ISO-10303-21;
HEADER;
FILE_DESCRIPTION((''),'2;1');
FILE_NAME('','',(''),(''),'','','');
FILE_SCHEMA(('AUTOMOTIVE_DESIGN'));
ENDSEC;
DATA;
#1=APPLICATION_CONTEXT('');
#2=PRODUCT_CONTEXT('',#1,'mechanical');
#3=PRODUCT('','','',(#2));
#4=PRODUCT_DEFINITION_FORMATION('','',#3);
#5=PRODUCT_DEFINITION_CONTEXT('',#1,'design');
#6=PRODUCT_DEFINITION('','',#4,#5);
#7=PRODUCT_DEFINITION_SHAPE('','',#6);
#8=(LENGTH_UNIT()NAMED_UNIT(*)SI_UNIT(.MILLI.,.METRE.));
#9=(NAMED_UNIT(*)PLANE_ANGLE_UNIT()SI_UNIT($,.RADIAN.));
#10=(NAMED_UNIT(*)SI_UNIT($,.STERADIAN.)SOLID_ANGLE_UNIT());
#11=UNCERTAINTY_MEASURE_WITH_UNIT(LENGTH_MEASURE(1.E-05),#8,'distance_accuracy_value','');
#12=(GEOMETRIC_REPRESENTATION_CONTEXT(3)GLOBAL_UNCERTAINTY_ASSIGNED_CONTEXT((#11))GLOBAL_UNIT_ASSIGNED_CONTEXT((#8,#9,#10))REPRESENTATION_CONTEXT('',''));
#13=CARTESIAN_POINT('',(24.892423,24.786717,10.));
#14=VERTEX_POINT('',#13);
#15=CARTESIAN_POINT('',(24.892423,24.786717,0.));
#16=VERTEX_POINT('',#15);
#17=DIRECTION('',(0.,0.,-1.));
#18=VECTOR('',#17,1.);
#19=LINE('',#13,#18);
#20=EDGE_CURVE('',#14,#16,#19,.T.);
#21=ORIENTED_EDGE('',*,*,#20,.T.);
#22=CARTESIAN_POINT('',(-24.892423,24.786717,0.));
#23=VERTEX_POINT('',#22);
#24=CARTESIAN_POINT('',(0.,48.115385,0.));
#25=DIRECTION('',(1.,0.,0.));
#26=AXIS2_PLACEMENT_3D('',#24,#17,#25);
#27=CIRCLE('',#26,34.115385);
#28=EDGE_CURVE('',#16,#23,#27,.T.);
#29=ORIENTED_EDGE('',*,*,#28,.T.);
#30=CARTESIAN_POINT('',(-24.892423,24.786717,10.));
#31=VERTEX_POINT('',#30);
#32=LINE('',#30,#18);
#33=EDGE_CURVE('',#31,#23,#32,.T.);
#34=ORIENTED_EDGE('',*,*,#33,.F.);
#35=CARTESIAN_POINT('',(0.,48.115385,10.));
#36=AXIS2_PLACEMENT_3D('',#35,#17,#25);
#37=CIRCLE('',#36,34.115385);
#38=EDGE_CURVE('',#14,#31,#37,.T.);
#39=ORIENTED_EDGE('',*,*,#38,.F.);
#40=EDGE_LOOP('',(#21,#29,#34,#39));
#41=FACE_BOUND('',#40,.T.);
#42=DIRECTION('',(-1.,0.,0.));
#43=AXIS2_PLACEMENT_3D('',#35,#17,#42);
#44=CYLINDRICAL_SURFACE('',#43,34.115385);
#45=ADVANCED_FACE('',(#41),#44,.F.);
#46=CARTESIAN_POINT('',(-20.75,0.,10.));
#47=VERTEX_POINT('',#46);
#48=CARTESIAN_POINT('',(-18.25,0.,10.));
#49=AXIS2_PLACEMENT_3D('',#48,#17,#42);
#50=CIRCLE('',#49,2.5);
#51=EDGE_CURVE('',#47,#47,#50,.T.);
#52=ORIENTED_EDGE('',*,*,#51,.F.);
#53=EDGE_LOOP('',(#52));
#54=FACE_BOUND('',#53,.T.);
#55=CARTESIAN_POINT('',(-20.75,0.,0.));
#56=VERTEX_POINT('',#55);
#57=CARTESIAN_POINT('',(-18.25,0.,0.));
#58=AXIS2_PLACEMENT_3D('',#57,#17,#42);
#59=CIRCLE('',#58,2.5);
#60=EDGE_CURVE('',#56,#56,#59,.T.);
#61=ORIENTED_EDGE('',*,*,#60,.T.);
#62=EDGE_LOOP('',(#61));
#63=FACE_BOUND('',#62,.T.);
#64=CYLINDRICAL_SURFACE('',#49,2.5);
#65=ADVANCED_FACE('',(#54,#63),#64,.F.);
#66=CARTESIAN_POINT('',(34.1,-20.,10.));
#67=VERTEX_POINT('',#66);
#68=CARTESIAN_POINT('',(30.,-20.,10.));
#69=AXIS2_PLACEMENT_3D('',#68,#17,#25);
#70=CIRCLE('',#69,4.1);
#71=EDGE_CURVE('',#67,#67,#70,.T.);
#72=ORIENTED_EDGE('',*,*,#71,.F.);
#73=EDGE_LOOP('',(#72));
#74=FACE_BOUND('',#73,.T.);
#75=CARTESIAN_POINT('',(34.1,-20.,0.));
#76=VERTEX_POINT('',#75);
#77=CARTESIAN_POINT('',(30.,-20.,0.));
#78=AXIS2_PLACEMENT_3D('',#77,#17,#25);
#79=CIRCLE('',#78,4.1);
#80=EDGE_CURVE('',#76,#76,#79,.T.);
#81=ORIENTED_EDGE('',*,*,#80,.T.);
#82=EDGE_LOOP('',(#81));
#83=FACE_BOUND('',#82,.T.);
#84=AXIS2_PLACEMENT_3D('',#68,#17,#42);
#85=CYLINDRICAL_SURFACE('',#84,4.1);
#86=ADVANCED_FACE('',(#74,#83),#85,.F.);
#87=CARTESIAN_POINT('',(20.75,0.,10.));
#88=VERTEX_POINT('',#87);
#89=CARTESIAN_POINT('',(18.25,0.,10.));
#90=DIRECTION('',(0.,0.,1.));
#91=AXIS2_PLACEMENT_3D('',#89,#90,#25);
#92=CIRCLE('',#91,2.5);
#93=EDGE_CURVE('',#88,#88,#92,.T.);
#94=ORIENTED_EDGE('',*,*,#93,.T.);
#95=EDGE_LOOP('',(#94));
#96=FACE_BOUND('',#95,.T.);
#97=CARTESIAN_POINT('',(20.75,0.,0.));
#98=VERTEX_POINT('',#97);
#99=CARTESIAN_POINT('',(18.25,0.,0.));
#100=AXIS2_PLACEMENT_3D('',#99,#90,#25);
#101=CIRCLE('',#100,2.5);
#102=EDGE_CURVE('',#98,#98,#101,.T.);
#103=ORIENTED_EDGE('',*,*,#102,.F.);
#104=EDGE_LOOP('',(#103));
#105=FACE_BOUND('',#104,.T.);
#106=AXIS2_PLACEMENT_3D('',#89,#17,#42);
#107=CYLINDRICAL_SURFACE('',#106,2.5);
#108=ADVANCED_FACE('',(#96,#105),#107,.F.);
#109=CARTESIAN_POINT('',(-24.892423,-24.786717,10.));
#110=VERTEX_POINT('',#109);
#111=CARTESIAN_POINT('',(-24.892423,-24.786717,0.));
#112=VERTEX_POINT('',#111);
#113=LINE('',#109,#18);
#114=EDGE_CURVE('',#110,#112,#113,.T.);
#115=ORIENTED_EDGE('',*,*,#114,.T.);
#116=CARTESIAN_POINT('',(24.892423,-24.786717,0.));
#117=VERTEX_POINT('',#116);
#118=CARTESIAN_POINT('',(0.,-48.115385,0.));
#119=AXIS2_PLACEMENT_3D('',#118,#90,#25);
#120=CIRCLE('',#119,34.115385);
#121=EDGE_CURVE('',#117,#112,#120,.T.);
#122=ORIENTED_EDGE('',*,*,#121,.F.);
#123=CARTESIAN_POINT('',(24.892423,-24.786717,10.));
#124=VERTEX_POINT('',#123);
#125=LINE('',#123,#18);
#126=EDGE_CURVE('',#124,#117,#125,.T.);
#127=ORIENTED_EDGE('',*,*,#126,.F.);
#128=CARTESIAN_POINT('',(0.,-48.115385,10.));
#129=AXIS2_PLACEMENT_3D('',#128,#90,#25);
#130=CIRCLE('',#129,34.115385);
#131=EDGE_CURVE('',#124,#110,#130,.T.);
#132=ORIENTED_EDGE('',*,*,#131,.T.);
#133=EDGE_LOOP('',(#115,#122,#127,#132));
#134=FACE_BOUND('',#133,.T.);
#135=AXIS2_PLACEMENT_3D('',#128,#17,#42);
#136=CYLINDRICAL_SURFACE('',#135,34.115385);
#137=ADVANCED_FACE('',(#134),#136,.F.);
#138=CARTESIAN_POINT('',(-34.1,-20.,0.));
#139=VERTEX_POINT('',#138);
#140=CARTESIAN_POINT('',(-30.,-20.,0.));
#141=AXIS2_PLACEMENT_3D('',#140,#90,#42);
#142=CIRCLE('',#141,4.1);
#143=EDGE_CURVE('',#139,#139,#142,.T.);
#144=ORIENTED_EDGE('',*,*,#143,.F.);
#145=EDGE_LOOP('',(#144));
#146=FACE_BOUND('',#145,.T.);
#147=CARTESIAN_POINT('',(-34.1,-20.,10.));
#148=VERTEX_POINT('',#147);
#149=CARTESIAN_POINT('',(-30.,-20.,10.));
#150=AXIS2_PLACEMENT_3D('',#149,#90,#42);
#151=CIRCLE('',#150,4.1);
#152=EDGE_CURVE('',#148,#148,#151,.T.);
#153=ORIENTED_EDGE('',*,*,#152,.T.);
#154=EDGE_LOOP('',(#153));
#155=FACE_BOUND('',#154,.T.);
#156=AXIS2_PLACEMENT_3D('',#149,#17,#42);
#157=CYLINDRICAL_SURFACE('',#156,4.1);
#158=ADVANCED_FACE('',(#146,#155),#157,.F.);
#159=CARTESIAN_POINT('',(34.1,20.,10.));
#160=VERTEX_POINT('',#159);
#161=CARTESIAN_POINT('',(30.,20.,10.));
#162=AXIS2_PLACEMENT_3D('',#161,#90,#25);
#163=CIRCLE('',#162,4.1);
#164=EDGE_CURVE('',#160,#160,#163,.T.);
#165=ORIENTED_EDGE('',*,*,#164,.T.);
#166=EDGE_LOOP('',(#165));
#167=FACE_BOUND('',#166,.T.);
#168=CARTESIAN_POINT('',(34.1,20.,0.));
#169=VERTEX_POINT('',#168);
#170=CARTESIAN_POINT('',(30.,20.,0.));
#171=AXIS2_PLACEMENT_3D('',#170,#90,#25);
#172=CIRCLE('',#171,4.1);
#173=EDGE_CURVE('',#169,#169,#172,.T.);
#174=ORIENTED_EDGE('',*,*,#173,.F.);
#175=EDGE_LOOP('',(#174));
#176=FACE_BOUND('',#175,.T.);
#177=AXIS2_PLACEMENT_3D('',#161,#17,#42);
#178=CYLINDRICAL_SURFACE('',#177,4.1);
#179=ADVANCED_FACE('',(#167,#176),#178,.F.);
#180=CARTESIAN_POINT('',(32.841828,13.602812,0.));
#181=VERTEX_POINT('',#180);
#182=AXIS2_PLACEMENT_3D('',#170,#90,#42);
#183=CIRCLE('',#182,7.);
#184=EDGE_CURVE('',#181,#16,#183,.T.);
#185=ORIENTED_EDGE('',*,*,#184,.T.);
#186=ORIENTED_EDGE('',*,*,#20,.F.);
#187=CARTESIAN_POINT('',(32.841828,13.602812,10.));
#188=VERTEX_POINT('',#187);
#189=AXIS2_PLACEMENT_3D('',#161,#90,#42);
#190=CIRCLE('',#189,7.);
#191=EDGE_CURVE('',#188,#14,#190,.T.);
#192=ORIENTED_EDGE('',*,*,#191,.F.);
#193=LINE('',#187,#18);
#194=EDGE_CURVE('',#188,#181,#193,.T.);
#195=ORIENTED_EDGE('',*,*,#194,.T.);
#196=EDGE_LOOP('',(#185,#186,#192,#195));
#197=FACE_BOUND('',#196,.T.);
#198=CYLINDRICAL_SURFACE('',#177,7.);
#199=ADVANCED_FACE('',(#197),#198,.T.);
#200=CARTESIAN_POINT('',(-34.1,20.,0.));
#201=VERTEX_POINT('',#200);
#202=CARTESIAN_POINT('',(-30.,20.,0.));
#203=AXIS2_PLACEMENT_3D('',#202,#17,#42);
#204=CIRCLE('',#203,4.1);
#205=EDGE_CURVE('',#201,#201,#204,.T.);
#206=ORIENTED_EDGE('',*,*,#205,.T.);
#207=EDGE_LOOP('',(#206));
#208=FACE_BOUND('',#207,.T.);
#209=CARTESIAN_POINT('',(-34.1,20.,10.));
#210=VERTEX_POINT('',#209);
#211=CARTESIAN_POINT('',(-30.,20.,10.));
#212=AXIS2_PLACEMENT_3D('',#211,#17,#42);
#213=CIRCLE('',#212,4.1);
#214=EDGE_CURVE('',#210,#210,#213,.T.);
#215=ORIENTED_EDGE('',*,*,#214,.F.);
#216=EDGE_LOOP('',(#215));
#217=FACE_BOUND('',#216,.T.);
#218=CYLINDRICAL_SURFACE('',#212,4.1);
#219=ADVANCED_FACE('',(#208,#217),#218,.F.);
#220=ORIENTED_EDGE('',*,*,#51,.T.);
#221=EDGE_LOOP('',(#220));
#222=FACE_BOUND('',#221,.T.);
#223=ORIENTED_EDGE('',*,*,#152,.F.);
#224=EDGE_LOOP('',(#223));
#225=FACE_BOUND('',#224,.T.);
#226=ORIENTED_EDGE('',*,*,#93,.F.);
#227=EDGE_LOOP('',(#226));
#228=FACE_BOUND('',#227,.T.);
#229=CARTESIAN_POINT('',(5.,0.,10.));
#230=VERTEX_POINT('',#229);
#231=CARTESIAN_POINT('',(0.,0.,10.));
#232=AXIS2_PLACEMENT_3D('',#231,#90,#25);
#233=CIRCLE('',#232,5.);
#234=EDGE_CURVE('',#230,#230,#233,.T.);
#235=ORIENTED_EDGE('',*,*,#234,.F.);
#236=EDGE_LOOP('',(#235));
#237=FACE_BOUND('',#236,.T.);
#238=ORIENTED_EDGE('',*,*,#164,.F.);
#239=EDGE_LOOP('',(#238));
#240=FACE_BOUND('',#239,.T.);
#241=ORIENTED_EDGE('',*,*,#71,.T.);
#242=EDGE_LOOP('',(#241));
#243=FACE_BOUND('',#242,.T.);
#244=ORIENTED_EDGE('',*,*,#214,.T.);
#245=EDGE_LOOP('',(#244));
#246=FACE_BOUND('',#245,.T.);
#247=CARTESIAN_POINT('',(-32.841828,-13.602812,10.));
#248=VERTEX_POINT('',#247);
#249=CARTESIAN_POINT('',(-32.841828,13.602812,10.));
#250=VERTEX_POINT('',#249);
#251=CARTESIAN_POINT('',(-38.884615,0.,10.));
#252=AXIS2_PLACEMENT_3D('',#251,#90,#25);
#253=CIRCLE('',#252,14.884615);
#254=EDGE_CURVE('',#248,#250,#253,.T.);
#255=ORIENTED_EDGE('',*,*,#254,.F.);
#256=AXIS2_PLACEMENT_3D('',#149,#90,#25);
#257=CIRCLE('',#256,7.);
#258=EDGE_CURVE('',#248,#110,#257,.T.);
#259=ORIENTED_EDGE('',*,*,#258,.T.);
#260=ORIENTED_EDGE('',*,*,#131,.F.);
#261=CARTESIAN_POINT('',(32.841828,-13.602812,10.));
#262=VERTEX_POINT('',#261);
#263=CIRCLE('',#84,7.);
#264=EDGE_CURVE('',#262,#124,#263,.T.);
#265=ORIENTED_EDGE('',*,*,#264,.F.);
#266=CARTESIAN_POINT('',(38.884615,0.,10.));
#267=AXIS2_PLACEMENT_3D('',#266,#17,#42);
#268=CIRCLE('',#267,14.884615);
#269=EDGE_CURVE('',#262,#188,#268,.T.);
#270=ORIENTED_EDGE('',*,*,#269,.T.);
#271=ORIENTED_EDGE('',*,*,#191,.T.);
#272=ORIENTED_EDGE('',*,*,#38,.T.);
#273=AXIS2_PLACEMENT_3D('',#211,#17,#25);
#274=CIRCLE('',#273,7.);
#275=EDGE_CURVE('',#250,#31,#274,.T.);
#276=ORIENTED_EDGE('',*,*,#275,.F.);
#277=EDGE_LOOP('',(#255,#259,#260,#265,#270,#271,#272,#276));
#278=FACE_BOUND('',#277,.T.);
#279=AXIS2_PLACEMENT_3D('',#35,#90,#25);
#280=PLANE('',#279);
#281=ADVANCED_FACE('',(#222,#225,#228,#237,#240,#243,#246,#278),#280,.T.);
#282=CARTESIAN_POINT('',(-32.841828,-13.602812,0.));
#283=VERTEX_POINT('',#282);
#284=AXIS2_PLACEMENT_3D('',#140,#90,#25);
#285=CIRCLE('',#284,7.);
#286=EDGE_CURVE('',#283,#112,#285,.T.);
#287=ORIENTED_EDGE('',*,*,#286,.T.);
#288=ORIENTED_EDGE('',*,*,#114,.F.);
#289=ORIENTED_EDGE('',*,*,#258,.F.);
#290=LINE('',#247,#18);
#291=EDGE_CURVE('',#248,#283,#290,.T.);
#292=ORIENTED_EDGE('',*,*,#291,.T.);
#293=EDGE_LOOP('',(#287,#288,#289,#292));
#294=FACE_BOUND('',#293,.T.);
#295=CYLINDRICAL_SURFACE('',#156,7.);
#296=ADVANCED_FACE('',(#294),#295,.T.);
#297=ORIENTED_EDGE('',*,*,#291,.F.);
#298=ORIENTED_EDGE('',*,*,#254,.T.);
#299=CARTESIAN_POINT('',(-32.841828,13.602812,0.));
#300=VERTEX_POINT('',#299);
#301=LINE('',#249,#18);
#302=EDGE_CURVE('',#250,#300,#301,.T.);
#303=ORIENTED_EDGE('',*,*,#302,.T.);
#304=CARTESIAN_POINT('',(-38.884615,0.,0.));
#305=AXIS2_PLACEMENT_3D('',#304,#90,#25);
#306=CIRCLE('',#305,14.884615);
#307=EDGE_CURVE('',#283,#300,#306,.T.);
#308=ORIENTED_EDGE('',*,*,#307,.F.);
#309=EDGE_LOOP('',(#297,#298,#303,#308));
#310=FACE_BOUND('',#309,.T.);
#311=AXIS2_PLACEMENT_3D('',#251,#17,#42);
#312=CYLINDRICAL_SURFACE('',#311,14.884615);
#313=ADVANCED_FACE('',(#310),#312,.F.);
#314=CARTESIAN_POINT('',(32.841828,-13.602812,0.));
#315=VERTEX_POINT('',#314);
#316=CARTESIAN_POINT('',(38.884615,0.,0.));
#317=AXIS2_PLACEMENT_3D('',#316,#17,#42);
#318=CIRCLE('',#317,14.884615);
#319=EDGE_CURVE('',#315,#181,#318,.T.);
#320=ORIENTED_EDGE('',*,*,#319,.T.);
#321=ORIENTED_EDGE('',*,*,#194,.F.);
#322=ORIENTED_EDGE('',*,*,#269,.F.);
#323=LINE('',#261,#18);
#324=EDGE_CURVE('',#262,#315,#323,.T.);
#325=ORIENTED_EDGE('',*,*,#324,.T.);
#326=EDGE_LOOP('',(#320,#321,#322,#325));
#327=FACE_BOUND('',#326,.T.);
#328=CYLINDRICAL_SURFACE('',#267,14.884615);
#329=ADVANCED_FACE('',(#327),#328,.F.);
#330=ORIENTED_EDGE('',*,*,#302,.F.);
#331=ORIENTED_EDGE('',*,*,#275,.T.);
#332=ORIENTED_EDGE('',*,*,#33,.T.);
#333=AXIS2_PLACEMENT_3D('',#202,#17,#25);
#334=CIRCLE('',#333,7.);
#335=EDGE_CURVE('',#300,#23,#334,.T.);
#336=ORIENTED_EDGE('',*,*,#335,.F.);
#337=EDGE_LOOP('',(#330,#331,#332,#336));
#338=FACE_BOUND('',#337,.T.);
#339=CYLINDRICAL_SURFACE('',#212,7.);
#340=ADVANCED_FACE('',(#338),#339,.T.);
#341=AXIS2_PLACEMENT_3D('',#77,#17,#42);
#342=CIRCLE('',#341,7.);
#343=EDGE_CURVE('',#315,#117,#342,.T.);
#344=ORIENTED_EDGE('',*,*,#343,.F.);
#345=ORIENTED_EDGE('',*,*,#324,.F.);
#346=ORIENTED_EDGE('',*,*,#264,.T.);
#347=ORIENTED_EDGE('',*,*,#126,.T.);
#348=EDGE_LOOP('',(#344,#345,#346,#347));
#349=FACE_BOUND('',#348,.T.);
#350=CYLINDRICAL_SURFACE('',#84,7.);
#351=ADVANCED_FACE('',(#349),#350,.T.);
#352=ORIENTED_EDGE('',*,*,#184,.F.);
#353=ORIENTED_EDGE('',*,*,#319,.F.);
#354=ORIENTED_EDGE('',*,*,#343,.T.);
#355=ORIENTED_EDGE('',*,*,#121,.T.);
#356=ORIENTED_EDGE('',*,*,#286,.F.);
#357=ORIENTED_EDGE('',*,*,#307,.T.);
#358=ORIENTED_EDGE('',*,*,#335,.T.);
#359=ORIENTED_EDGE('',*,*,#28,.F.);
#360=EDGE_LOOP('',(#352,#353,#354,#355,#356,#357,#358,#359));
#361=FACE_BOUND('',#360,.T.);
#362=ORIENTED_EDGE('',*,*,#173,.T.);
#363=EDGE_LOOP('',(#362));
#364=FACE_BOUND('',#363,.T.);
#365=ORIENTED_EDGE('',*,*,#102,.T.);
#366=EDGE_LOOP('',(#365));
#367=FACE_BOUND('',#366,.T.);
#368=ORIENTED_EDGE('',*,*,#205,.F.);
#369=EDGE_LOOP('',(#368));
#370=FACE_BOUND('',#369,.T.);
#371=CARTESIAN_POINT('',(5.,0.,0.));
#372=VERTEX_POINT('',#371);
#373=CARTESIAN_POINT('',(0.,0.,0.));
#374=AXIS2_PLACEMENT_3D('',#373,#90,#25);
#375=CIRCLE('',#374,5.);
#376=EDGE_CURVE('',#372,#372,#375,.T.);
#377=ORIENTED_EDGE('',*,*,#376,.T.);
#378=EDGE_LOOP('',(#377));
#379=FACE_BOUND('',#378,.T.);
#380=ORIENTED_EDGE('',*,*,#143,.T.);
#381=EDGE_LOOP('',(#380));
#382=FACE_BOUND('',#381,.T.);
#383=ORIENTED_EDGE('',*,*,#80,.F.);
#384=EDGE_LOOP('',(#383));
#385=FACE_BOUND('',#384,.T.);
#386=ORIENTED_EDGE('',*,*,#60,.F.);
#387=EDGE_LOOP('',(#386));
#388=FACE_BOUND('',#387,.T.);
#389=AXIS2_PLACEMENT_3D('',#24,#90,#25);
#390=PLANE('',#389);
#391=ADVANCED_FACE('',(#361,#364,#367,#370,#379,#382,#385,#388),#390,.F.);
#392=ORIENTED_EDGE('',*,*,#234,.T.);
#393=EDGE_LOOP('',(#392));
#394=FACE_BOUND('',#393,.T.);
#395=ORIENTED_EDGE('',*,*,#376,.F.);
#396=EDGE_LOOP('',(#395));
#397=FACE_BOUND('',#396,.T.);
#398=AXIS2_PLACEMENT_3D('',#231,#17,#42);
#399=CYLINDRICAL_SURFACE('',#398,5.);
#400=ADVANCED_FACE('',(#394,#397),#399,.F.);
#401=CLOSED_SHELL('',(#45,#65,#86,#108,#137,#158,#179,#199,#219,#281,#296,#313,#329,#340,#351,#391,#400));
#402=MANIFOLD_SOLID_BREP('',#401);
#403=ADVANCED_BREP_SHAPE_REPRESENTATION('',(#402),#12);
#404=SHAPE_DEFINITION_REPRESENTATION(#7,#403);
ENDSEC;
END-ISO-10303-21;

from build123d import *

# Parameters (mm, degrees)
SALIENTE_EXTRUIR1_DEPTH = 10
CROQUIS3_R              = 4.1
CORTAR_EXTRUIR1_DEPTH   = 47.882832679
CROQUIS9_R              = 2.5
CORTAR_EXTRUIR6_DEPTH   = 47.882832679
SIMETR_A2_OUTLINE_R     = 4.1
SIMETR_A2_OUTLINE_R_2   = 2.5
SIMETR_A2_DEPTH         = 10
CROQUIS8_R              = 5
CORTAR_EXTRUIR2_DEPTH   = 10


# Read off the part's stored shape, not the designer's step: Simetría2
with BuildPart() as part:
    # Croquis2 → Saliente-Extruir1 (new body)
    with BuildSketch(Plane.XY):
        with BuildLine():
            Line((24, 0), (0, 0))
            Line((0, 0), (0, 14))
            ThreePointArc((0, 14), (13.564530661, 16.812621552), (24.892422825, 24.786716558))
            ThreePointArc((24.892422825, 24.786716558), (35.705553054, 24.055448723), (32.841827768, 13.602811951))
            ThreePointArc((32.841827768, 13.602811951), (26.404704634, 8.111941988), (24, 0))
        make_face()
    saliente_extruir1 = extrude(amount=SALIENTE_EXTRUIR1_DEPTH)

    # Croquis3 → Cortar-Extruir1 (cut, through all)
    with BuildSketch(Plane.XY):
        with Locations((30, 20)):
            Circle(CROQUIS3_R)
    cortar_extruir1 = extrude(amount=CORTAR_EXTRUIR1_DEPTH, mode=Mode.SUBTRACT)

    # Simetría1: Saliente-Extruir1, Cortar-Extruir1 across plane
    add(saliente_extruir1.mirror(Plane.ZX))
    add(cortar_extruir1.mirror(Plane.ZX), mode=Mode.SUBTRACT)

    # Croquis9 → Cortar-Extruir6 (cut, through all)
    with BuildSketch(Plane.XY):
        with Locations((18.25, 0)):
            Circle(CROQUIS9_R)
    extrude(amount=CORTAR_EXTRUIR6_DEPTH, mode=Mode.SUBTRACT)

    # Simetría2 outline → Simetría2 (add)
    with BuildSketch(Plane.XY):
        with BuildLine():
            Line((0, -14), (0, 14))
            ThreePointArc((0, 14), (-13.564530661, 16.812621552), (-24.892422825, 24.786716558))
            ThreePointArc((-24.892422825, 24.786716558), (-35.705553054, 24.055448723), (-32.841827768, 13.602811951))
            ThreePointArc((-32.841827768, 13.602811951), (-24, 0), (-32.841827768, -13.602811951))
            ThreePointArc((-32.841827768, -13.602811951), (-35.705553054, -24.055448723), (-24.892422825, -24.786716558))
            ThreePointArc((-24.892422825, -24.786716558), (-13.564530661, -16.812621552), (0, -14))
        make_face()
        with Locations((-30, -20)):
            Circle(SIMETR_A2_OUTLINE_R, mode=Mode.SUBTRACT)
        with Locations((-30, 20)):
            Circle(SIMETR_A2_OUTLINE_R, mode=Mode.SUBTRACT)
        with Locations((-18.25, 0)):
            Circle(SIMETR_A2_OUTLINE_R_2, mode=Mode.SUBTRACT)
    extrude(amount=SIMETR_A2_DEPTH)

    # Croquis8 → Cortar-Extruir2 (cut)
    with BuildSketch(Plane.XY):
        Circle(CROQUIS8_R)
    extrude(amount=CORTAR_EXTRUIR2_DEPTH, mode=Mode.SUBTRACT)


solid = part.part
